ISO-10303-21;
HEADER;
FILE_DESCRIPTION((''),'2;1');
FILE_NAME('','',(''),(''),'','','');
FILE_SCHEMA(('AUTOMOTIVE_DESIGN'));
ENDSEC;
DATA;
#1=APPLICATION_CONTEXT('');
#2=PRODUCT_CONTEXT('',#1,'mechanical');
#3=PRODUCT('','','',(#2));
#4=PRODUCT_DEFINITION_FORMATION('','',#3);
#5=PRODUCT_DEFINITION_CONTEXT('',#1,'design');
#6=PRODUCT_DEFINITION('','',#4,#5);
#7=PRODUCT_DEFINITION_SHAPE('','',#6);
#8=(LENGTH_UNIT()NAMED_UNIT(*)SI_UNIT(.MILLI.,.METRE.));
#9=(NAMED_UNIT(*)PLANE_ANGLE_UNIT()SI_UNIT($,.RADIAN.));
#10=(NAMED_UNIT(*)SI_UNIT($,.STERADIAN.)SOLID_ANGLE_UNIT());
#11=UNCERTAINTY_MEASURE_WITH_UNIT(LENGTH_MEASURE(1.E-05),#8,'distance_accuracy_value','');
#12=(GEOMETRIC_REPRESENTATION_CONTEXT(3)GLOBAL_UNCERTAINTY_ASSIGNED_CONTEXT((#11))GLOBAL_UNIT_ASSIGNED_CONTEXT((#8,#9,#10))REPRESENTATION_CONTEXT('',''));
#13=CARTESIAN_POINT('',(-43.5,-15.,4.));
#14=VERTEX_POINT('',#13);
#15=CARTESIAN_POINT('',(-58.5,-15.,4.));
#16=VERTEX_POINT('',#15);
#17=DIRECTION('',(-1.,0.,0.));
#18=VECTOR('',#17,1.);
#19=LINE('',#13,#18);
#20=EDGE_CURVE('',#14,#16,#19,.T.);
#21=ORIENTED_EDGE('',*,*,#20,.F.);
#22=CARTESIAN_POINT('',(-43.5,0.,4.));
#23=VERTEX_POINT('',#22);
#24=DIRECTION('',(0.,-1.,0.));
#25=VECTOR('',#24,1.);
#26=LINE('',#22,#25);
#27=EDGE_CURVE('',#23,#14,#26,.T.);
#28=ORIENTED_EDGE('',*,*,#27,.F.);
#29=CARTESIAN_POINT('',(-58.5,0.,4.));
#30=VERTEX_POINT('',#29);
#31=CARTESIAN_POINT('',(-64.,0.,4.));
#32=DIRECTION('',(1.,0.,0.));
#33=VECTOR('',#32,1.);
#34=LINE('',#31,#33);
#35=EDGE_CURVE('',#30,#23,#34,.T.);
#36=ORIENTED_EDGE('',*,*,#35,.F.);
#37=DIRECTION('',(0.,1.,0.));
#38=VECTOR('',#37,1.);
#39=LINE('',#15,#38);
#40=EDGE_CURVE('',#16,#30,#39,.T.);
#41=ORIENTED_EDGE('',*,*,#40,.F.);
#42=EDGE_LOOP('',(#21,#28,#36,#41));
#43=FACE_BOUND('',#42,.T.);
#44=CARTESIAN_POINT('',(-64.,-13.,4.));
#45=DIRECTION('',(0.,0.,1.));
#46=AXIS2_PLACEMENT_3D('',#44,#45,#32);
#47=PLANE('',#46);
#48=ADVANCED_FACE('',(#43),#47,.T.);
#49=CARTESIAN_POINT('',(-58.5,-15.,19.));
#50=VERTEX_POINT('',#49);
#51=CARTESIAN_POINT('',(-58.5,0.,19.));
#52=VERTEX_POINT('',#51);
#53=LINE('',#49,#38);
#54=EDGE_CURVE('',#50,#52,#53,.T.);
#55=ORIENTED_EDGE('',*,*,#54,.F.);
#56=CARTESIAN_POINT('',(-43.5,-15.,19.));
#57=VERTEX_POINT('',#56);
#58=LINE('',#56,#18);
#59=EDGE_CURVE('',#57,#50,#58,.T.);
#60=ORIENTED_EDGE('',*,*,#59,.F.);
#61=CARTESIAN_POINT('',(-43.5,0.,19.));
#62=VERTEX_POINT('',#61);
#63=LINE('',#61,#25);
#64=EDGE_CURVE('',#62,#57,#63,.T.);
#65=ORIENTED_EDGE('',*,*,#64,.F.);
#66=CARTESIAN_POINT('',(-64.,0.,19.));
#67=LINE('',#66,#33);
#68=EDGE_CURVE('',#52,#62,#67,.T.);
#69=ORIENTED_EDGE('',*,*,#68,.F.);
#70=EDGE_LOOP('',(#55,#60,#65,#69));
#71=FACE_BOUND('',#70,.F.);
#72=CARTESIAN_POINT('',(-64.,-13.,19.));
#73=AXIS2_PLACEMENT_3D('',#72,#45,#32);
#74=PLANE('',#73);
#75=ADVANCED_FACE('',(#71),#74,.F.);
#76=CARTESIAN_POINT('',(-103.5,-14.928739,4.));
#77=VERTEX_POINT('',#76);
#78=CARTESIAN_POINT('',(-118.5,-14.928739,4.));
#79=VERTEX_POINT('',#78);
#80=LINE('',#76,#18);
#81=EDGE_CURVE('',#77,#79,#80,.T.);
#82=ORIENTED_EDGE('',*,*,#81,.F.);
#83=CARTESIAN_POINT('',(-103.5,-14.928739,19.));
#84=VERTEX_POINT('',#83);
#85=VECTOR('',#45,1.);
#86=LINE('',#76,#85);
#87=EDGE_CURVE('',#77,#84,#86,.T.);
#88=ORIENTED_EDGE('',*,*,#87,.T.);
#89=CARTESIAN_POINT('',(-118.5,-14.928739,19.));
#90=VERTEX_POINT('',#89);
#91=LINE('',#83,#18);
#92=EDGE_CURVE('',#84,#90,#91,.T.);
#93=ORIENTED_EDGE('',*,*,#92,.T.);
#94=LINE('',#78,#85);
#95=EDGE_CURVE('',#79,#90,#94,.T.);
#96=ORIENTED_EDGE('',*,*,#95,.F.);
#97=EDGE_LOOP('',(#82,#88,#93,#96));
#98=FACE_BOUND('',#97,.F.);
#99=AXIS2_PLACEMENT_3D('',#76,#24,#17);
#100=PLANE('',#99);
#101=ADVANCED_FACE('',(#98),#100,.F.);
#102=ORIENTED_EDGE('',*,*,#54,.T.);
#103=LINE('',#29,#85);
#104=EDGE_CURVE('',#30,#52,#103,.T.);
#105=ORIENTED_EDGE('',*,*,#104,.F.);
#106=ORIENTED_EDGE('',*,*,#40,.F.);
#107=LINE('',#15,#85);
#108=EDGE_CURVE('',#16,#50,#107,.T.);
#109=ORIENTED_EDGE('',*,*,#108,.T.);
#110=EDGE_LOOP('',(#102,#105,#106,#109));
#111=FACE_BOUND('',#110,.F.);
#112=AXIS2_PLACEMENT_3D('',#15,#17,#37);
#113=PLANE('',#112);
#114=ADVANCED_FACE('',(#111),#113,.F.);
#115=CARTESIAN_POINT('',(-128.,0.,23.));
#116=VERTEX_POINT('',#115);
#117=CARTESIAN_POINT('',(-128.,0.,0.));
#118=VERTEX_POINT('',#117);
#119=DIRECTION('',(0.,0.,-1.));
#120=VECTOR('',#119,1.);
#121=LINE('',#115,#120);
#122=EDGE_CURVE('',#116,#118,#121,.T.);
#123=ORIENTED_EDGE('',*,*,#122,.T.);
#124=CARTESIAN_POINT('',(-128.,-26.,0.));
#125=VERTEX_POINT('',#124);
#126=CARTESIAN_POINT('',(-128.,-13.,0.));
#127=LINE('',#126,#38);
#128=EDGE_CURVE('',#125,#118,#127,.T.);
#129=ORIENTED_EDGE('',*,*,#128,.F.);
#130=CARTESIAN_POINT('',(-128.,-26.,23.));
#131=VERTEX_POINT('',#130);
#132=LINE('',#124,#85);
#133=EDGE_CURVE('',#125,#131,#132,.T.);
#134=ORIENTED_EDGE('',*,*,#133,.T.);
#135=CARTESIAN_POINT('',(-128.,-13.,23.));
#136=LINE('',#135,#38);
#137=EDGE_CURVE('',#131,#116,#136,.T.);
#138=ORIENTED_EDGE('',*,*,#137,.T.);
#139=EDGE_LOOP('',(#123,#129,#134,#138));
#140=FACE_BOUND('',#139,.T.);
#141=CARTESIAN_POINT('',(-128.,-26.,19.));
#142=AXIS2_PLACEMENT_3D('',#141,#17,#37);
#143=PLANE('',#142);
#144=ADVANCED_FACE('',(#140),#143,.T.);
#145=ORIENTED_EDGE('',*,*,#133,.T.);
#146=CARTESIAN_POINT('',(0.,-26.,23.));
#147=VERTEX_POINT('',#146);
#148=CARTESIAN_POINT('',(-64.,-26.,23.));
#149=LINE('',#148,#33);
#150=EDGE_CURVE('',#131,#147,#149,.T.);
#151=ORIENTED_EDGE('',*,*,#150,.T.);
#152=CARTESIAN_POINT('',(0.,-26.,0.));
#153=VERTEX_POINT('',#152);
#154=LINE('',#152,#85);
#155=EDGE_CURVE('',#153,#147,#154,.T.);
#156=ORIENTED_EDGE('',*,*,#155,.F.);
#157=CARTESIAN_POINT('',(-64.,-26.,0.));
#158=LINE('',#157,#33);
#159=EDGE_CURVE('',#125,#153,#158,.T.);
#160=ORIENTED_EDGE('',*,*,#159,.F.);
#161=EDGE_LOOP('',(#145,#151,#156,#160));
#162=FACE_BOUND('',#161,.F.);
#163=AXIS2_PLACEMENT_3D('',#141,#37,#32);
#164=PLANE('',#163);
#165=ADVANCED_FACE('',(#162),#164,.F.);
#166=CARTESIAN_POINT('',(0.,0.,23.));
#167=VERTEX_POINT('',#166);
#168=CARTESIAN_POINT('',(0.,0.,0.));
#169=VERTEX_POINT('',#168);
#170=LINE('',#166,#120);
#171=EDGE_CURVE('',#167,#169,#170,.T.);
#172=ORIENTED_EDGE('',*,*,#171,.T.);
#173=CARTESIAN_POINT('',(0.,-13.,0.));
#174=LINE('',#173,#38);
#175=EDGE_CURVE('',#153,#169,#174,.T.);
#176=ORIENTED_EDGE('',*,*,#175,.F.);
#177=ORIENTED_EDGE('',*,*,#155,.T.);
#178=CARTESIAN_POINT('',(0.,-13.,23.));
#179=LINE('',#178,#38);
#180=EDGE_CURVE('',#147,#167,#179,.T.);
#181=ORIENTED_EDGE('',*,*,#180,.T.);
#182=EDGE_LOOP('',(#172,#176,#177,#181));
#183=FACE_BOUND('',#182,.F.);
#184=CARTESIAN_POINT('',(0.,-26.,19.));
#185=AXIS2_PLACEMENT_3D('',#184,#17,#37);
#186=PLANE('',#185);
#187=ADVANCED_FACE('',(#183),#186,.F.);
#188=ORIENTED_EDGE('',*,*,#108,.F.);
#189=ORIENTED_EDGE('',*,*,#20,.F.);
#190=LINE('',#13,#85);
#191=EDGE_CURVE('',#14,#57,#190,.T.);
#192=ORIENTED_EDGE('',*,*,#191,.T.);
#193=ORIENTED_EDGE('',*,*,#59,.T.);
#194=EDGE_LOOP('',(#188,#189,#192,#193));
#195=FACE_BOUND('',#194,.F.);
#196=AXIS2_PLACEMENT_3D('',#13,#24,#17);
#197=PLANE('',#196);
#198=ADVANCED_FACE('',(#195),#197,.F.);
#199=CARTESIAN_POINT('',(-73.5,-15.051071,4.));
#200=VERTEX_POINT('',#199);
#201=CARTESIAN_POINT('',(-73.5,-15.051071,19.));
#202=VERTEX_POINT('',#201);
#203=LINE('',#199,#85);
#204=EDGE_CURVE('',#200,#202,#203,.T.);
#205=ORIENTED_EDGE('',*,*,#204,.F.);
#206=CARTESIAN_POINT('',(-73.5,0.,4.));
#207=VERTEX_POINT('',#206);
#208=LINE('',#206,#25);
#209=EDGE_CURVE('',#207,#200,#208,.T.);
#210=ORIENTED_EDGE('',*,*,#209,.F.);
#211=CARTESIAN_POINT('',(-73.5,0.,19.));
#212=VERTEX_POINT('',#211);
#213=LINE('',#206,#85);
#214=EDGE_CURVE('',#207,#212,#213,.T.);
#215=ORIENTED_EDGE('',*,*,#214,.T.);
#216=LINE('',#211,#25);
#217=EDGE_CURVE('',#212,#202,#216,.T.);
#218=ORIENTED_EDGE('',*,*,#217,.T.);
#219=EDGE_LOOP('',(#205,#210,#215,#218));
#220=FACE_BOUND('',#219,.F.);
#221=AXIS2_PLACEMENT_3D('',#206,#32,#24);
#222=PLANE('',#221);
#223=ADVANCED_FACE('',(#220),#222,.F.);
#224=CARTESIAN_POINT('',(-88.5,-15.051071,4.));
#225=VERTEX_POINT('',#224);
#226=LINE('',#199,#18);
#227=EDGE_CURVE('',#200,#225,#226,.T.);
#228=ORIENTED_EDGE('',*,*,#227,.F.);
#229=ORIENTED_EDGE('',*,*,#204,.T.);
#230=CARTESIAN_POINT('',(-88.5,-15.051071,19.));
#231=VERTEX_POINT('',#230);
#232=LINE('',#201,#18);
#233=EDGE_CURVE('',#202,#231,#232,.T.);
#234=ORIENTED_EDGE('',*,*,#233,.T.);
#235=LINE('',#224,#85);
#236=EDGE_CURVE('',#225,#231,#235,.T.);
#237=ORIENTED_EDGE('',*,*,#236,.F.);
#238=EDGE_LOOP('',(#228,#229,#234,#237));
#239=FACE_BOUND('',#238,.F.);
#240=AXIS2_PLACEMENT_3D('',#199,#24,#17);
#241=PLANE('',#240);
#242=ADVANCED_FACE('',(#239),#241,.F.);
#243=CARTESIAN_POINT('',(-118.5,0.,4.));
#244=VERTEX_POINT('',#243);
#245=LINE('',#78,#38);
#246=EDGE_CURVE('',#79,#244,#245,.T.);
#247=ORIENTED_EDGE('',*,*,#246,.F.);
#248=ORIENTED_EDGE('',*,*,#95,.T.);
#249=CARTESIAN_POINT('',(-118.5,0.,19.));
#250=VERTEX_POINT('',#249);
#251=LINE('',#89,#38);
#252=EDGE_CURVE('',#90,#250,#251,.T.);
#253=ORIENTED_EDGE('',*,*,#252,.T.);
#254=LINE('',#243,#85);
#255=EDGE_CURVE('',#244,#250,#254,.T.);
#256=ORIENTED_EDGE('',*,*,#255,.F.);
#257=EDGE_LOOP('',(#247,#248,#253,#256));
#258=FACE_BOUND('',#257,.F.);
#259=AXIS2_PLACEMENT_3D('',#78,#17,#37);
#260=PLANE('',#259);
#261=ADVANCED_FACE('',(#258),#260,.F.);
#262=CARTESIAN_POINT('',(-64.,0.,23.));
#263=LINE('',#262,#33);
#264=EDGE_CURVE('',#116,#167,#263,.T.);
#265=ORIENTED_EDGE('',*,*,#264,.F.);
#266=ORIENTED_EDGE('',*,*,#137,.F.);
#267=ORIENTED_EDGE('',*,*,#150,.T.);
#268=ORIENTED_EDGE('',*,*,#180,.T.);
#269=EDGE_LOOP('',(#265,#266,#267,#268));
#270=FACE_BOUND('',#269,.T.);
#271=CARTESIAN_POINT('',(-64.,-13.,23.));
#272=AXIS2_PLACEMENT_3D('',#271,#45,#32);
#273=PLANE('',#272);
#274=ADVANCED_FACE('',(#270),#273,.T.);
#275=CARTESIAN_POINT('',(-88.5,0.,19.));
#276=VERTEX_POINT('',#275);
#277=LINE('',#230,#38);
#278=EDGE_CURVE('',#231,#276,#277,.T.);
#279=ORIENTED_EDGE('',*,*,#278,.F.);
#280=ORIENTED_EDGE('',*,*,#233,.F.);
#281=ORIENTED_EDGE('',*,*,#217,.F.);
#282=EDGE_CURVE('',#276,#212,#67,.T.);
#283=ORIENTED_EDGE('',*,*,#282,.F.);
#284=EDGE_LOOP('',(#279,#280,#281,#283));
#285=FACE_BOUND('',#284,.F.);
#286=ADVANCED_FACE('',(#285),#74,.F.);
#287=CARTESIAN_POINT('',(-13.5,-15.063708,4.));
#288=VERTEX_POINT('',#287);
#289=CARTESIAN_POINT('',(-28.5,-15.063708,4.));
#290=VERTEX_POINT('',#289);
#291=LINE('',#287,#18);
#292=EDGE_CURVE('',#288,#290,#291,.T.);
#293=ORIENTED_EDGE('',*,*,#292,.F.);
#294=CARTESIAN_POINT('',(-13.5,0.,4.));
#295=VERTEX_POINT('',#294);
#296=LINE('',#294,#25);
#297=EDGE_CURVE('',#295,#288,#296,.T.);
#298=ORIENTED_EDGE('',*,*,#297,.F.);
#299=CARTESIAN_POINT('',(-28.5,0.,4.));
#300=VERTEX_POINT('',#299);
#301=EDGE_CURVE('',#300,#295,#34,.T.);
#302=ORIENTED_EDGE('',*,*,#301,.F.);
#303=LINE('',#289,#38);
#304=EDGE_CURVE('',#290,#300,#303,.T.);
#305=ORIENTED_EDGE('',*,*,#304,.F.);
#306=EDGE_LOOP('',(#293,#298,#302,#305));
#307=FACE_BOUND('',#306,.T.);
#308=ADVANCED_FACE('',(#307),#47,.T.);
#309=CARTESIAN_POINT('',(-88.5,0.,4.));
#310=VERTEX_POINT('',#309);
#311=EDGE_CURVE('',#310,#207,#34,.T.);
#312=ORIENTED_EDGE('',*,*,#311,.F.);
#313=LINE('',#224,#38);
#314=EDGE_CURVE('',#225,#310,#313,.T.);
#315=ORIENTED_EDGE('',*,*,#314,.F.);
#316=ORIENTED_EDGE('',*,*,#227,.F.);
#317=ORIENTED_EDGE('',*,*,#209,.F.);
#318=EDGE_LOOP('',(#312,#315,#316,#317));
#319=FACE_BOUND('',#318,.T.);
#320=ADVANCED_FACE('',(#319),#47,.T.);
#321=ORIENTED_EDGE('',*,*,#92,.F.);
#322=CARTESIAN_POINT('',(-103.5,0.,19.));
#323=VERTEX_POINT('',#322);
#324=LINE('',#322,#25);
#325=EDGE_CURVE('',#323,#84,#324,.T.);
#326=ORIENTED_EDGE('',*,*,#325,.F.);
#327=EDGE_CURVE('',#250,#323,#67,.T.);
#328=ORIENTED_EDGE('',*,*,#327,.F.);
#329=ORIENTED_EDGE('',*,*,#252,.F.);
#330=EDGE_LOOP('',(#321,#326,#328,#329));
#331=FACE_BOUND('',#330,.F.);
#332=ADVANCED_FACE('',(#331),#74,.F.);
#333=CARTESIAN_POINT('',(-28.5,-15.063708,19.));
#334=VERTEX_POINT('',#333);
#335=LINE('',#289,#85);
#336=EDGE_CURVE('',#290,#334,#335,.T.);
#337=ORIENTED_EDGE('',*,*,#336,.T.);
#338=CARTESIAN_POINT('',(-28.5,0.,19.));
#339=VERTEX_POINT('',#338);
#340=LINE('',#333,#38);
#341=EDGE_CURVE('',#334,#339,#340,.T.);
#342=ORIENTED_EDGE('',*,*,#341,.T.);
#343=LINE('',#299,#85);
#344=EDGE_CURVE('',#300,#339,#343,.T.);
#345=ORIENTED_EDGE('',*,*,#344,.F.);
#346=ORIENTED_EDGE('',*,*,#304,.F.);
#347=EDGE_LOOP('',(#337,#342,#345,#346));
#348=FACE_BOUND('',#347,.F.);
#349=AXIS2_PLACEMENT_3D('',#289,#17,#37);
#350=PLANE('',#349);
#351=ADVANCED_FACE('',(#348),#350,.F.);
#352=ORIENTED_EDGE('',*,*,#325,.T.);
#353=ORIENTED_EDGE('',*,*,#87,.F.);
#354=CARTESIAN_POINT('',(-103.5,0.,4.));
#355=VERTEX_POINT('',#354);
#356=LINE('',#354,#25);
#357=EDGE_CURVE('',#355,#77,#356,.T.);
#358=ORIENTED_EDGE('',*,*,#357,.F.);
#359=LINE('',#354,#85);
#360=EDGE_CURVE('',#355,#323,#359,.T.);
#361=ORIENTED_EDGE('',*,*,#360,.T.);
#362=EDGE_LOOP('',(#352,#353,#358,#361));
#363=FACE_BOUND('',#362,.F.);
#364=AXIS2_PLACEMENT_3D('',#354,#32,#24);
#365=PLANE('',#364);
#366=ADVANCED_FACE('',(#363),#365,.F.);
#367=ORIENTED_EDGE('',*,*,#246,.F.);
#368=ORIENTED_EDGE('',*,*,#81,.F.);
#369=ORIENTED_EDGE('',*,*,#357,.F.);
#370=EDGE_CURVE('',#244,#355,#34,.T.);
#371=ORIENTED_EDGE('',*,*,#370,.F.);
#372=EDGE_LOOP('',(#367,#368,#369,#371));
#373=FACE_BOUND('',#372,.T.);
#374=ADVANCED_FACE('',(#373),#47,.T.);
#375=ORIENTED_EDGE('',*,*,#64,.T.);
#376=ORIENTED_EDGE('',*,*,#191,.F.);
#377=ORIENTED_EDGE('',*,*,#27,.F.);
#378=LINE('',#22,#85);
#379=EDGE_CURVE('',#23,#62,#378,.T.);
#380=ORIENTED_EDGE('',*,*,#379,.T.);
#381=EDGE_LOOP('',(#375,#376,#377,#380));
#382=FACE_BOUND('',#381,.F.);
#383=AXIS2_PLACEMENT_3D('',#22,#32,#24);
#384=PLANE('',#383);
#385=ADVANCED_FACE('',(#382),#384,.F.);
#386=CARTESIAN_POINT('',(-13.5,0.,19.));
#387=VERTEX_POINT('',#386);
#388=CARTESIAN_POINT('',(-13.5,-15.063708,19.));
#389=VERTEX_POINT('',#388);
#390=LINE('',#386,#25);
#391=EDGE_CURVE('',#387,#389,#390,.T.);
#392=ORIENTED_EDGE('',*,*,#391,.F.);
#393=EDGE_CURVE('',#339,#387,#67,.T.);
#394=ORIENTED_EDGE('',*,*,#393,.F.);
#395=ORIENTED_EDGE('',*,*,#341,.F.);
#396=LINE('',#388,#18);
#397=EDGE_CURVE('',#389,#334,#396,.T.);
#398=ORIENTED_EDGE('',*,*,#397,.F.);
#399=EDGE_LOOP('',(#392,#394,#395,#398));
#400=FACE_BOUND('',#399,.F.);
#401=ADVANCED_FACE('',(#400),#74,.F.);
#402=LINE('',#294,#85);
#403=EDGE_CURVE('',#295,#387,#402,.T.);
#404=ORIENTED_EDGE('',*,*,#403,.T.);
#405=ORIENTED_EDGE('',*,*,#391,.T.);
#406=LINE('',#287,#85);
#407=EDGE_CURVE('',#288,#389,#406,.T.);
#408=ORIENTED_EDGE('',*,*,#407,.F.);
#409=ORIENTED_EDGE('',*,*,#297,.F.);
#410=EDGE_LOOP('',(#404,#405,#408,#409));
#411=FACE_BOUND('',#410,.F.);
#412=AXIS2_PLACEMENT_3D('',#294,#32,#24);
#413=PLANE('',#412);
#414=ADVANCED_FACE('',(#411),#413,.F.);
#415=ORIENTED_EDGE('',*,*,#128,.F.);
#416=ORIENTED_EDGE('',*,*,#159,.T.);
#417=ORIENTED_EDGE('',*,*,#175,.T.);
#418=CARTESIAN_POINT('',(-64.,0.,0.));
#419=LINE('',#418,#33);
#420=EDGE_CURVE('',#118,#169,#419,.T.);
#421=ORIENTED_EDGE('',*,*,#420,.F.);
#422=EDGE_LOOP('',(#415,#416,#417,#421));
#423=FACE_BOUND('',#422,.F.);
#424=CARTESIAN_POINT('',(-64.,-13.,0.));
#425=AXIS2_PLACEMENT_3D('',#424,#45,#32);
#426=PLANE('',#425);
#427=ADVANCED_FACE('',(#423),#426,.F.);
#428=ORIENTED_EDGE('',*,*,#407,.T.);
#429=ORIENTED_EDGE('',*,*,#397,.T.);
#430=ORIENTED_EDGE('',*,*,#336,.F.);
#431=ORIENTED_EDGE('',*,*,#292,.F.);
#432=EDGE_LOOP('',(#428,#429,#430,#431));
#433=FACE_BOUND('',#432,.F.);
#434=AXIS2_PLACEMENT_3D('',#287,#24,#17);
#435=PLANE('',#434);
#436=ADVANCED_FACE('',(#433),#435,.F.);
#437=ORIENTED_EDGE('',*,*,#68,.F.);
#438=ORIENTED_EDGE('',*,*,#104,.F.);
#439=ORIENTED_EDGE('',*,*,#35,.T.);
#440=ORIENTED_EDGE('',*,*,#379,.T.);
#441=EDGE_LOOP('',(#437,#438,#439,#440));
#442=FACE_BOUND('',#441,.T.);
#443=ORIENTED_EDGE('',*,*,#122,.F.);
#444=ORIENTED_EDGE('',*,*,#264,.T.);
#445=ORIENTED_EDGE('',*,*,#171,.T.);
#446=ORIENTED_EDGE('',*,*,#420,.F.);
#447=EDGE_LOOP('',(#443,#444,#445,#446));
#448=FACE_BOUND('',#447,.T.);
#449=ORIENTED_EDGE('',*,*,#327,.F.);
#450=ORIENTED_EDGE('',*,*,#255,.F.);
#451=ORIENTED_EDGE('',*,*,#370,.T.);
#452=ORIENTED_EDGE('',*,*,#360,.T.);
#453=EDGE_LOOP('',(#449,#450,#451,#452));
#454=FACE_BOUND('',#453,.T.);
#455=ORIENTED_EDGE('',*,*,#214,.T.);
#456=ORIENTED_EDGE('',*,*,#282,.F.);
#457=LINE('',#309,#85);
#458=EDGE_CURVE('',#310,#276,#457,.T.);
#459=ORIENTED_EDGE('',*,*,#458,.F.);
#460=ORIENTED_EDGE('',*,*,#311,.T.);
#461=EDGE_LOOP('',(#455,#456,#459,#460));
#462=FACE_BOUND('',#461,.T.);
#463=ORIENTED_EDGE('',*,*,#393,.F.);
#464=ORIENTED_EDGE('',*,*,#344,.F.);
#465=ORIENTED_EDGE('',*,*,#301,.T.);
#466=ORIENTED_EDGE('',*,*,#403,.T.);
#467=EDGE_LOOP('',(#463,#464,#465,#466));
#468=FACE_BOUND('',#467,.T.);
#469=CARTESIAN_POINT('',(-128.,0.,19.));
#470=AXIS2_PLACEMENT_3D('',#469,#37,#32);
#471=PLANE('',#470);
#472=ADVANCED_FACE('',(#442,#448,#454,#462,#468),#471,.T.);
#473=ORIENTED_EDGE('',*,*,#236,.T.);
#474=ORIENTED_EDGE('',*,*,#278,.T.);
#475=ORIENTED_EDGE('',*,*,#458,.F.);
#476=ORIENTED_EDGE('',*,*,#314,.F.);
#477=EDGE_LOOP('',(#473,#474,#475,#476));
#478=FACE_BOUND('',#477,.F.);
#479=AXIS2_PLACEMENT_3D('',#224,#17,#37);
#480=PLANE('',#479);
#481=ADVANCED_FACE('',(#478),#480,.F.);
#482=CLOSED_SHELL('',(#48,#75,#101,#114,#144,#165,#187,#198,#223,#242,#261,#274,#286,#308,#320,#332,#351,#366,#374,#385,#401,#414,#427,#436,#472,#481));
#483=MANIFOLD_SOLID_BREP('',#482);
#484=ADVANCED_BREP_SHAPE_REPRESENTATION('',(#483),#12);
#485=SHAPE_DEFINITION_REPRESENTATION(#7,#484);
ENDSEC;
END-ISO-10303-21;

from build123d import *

# Parameters (mm, degrees)
F0_W     = 128
F0_H     = 26
F1_DEPTH = 4
F3_DEPTH = 15
F4_W     = 128
F4_H     = 26
F5_DEPTH = 4


# Not quite as in the source:
# - a feature names something its author has since deleted; it is built from what else it names


with BuildPart() as f1:
    # F0 (on Top) → F1 (new body)
    with BuildSketch(Plane.XY):
        with Locations((-64, -13)):
            Rectangle(F0_W, F0_H)
    extrude(amount=F1_DEPTH)

    # F2 (on face) → F3 (join)
    with BuildSketch(Plane.XY.offset(4)):
        Polygon((-88.4999999069, 0), (-103.4999999069, 0), (-103.4999999069, -14.9287388836), (-118.4999999069, -14.9287388836), (-118.4999999069, 0), (-128, 0), (-128, -26), (0, -26), (0, 0), (-13.5, 0), (-13.5, -15.0637076219), (-28.5, -15.0637076219), (-28.5, 0), (-43.4999999069, 0), (-43.4999999069, -15), (-58.4999999069, -15), (-58.4999999069, 0), (-73.4999999069, 0), (-73.4999999069, -15.0510713975), (-88.4999999069, -15.0510713975), align=None)
    extrude(amount=F3_DEPTH)

    # F4 (on face) → F5 (join)
    with BuildSketch(Plane.XY.offset(19)):
        with Locations((-64, -13)):
            Rectangle(F4_W, F4_H)
    extrude(amount=F5_DEPTH)


solid = f1.part
